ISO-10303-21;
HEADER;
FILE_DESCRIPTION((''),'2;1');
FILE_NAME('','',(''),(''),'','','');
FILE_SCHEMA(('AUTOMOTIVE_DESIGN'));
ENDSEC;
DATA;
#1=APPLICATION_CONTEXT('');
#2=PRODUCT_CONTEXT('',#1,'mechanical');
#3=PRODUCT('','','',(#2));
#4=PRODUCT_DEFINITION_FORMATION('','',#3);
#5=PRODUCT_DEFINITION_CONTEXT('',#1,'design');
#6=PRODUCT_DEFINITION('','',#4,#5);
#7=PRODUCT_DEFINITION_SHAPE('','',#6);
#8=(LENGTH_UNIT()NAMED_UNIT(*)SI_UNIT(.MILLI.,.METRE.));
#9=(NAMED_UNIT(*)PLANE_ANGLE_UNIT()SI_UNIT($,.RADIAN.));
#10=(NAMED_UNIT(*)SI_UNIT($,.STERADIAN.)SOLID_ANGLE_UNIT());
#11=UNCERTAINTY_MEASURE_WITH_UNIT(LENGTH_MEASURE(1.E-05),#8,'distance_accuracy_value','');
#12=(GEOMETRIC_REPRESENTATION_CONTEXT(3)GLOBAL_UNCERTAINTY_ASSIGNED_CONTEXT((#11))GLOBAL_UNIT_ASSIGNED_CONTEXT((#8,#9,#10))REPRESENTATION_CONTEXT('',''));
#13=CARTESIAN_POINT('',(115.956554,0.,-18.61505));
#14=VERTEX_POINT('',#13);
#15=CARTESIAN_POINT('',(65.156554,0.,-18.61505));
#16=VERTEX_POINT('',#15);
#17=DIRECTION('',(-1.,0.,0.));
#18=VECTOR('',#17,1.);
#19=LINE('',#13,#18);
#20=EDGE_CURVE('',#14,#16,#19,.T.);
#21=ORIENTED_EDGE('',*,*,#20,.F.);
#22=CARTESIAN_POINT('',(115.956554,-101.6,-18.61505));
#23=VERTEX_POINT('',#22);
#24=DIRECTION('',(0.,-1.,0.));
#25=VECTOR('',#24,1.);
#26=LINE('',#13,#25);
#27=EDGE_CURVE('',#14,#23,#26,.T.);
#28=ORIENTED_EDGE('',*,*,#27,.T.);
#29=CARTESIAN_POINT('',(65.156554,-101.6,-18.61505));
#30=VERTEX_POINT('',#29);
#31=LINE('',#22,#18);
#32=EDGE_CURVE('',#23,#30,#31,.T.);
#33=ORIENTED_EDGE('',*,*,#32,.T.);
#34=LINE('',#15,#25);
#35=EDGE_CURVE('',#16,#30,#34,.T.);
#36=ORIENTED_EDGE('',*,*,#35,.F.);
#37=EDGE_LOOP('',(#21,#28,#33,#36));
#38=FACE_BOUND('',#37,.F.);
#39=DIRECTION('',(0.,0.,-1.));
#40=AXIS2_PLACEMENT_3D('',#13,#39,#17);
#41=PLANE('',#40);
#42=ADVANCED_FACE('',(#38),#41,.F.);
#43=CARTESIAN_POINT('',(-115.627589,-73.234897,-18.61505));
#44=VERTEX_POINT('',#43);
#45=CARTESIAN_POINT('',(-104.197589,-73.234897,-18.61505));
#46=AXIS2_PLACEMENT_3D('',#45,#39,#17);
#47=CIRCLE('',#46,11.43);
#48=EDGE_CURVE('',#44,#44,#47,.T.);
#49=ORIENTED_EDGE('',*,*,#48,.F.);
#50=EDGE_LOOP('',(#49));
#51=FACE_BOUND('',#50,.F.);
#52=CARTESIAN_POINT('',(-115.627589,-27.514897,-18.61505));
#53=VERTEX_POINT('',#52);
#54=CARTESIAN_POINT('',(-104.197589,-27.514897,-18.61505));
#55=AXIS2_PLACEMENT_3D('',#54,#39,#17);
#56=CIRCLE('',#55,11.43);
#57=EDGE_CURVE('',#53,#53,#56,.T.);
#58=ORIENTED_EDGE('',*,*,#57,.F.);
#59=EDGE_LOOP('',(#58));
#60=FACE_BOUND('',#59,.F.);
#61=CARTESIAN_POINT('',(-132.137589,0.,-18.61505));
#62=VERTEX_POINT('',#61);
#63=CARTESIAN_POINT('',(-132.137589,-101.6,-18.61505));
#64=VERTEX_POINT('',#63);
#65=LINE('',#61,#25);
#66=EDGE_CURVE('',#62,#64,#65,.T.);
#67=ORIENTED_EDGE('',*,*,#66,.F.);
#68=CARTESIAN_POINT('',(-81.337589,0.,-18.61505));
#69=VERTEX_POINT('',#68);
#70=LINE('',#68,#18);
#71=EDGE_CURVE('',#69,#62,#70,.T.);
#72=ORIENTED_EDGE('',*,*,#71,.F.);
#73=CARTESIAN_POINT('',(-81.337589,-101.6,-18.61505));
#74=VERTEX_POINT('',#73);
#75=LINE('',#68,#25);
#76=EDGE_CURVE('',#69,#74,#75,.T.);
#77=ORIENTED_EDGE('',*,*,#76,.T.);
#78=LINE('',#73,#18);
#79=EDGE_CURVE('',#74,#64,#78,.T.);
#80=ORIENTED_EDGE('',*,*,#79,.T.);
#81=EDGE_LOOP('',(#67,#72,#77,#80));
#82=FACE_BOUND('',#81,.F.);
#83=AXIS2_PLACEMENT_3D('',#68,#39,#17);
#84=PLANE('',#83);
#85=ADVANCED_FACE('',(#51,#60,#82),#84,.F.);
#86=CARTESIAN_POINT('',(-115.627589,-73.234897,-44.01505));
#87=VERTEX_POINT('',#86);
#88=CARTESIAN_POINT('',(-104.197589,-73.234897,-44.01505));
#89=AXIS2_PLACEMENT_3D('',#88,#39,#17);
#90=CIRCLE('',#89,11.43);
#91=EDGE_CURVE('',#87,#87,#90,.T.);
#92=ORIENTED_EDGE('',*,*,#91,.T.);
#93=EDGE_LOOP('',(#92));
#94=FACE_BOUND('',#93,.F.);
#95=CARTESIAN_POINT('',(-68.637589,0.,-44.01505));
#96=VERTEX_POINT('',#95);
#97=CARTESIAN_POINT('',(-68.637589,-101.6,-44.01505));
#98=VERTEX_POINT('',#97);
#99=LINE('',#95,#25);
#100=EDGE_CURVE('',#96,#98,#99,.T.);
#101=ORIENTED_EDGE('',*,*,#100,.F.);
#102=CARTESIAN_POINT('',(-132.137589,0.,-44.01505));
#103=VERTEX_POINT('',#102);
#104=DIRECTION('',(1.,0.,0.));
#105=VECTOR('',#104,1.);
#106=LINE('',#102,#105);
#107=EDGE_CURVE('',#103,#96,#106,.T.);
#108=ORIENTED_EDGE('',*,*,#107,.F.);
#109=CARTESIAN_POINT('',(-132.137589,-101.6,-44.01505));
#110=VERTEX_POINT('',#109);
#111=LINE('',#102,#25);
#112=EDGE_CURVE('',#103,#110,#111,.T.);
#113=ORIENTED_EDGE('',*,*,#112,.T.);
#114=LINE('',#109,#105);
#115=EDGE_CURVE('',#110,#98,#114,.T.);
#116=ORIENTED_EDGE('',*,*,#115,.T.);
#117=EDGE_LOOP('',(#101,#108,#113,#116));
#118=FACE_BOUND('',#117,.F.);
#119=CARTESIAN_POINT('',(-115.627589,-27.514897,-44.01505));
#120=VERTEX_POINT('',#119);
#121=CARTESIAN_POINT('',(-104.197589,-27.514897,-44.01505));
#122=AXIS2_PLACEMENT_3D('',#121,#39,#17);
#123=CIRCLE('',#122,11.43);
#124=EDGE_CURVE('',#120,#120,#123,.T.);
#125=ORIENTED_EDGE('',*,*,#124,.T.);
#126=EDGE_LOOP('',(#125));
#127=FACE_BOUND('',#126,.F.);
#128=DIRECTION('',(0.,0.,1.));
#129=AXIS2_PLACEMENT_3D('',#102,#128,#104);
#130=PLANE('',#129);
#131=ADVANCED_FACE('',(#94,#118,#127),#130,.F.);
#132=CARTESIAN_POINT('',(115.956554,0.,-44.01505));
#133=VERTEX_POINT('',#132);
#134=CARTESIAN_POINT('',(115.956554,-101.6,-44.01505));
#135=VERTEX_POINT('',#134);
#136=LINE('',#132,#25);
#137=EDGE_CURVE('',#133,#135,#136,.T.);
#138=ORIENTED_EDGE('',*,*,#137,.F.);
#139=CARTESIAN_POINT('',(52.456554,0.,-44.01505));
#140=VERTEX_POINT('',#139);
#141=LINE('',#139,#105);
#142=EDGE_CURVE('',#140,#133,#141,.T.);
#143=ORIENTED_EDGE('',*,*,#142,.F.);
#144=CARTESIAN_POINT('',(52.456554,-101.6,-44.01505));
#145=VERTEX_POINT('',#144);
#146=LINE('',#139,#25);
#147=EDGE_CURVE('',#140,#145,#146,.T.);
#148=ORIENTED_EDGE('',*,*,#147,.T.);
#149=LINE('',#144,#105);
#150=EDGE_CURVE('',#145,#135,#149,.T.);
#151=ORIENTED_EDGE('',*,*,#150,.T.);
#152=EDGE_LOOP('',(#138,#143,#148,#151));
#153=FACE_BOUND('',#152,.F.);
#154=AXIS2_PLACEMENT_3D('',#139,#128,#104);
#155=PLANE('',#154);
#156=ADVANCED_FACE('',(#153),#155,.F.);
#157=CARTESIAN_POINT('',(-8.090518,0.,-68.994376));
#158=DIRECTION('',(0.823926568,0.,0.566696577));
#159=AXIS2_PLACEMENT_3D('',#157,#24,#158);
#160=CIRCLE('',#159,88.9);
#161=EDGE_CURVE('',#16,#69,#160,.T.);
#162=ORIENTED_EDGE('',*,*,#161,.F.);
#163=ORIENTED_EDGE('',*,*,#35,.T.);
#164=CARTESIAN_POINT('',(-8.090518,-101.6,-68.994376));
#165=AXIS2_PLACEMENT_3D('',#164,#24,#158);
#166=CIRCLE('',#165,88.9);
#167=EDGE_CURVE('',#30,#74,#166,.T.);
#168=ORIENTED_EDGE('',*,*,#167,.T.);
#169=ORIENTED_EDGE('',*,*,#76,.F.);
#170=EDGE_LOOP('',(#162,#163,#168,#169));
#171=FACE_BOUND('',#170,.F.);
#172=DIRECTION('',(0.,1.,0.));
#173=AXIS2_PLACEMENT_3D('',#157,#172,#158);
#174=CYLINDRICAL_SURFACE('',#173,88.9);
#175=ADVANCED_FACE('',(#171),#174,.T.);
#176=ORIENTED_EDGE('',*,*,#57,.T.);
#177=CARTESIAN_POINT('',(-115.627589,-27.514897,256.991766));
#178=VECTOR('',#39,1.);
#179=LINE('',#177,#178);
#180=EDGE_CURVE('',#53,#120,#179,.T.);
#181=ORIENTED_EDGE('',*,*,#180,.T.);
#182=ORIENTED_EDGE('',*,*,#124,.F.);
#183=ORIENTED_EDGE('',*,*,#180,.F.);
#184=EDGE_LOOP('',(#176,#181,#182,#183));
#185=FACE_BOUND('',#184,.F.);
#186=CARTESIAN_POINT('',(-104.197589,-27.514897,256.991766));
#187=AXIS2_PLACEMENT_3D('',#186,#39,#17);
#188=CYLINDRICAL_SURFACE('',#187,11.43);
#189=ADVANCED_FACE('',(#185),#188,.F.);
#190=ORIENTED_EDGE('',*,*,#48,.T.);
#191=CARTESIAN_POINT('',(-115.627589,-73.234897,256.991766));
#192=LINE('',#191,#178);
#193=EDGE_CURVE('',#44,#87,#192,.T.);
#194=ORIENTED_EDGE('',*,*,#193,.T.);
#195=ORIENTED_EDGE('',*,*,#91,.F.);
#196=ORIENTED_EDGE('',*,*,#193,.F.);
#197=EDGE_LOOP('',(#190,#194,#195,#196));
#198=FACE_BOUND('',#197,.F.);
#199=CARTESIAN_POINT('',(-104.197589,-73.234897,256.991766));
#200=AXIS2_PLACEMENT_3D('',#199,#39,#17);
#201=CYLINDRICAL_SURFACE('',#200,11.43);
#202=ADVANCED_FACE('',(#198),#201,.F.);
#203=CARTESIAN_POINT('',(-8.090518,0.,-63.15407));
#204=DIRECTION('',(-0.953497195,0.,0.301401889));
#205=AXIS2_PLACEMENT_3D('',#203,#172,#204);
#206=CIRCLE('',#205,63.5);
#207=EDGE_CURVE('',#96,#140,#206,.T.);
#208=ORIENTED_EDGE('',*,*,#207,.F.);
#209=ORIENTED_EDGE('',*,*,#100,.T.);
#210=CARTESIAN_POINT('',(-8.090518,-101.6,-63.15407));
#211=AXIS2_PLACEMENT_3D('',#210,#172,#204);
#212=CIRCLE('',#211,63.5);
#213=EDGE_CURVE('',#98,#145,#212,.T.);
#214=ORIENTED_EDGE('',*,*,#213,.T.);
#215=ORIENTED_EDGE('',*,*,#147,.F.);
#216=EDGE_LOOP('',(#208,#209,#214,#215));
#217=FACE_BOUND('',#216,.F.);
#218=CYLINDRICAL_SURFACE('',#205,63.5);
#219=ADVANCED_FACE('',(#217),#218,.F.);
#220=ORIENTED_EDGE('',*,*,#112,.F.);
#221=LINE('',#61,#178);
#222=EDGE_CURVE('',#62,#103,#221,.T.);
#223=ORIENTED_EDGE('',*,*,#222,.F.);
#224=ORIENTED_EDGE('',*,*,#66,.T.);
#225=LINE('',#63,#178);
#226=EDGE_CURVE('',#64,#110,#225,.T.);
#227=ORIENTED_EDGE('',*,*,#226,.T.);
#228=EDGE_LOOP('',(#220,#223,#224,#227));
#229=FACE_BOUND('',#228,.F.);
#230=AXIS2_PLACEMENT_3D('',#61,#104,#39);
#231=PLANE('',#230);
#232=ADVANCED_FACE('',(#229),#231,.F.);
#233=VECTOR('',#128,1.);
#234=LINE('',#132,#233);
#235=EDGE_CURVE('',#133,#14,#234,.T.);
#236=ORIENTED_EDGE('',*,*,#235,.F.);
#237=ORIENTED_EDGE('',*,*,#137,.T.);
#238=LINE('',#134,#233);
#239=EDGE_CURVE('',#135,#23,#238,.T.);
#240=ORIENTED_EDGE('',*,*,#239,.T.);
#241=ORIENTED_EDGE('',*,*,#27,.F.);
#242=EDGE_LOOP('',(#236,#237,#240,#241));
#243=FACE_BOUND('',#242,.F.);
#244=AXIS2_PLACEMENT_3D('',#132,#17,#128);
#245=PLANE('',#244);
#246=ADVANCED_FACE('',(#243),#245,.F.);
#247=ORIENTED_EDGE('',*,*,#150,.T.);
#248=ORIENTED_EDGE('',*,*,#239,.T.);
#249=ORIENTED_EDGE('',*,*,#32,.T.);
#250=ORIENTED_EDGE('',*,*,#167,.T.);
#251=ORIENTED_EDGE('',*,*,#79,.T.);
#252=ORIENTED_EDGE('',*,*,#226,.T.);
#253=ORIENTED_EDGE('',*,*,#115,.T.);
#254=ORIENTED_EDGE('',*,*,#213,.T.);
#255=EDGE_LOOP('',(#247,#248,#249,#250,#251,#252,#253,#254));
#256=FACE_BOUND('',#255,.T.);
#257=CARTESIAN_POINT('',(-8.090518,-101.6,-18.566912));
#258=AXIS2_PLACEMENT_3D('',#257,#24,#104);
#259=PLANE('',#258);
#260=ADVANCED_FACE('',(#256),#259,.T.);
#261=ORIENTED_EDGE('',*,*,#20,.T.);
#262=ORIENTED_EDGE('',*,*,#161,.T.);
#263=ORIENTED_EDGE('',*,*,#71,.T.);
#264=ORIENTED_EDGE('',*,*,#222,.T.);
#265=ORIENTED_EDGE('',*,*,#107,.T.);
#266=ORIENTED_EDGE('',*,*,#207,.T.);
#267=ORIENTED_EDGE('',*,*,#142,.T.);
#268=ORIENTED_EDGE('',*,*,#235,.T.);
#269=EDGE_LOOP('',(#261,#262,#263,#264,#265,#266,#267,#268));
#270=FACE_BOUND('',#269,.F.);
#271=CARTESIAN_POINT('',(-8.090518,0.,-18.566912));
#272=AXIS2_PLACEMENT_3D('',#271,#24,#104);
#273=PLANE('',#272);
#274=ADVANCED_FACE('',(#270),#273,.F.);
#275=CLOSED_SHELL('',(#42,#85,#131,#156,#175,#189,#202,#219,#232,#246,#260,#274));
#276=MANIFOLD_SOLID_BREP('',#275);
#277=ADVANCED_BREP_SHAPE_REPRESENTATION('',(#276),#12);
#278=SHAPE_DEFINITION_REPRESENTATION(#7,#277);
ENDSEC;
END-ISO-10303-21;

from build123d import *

# Parameters (mm, degrees)
F1_DEPTH = 101.6
F3_D     = 22.86


# Not quite as in the source:
# - a feature names something its author has since deleted; it is built from what else it names
# - the program builds the solid bodies; features that only make, move or delete a surface that nothing else refers to are left out


with BuildPart() as f1:
    # F0 (on Front) → F1 (new body)
    with BuildSketch(Plane.XZ):
        with BuildLine():
            Line((-132.1375894797, -18.6150499344), (-132.1375894797, -44.0150499344))
            Line((-132.1375894797, -44.0150499344), (-68.6375894797, -44.0150499344))
            ThreePointArc((-68.6375894797, -44.0150499344), (-8.0905175805, 0.345930121), (52.4565543186, -44.0150499344))
            Line((52.4565543186, -44.0150499344), (115.9565543186, -44.0150499344))
            Line((115.9565543186, -44.0150499344), (115.9565543186, -18.6150499344))
            Line((115.9565543186, -18.6150499344), (65.1565543186, -18.6150499344))
            ThreePointArc((65.1565543186, -18.6150499344), (-8.0905175805, 19.9056243635), (-81.3375894797, -18.6150499344))
            Line((-81.3375894797, -18.6150499344), (-132.1375894797, -18.6150499344))
        make_face()
    extrude(amount=F1_DEPTH)

    # F3 (through all)
    with Locations(Plane.XY.offset(-18.6150499344)):
        with Locations((-104.1975894797, -27.5148972869), (-104.1975894797, -73.2348972869)):
            Hole(F3_D / 2)


solid = f1.part
